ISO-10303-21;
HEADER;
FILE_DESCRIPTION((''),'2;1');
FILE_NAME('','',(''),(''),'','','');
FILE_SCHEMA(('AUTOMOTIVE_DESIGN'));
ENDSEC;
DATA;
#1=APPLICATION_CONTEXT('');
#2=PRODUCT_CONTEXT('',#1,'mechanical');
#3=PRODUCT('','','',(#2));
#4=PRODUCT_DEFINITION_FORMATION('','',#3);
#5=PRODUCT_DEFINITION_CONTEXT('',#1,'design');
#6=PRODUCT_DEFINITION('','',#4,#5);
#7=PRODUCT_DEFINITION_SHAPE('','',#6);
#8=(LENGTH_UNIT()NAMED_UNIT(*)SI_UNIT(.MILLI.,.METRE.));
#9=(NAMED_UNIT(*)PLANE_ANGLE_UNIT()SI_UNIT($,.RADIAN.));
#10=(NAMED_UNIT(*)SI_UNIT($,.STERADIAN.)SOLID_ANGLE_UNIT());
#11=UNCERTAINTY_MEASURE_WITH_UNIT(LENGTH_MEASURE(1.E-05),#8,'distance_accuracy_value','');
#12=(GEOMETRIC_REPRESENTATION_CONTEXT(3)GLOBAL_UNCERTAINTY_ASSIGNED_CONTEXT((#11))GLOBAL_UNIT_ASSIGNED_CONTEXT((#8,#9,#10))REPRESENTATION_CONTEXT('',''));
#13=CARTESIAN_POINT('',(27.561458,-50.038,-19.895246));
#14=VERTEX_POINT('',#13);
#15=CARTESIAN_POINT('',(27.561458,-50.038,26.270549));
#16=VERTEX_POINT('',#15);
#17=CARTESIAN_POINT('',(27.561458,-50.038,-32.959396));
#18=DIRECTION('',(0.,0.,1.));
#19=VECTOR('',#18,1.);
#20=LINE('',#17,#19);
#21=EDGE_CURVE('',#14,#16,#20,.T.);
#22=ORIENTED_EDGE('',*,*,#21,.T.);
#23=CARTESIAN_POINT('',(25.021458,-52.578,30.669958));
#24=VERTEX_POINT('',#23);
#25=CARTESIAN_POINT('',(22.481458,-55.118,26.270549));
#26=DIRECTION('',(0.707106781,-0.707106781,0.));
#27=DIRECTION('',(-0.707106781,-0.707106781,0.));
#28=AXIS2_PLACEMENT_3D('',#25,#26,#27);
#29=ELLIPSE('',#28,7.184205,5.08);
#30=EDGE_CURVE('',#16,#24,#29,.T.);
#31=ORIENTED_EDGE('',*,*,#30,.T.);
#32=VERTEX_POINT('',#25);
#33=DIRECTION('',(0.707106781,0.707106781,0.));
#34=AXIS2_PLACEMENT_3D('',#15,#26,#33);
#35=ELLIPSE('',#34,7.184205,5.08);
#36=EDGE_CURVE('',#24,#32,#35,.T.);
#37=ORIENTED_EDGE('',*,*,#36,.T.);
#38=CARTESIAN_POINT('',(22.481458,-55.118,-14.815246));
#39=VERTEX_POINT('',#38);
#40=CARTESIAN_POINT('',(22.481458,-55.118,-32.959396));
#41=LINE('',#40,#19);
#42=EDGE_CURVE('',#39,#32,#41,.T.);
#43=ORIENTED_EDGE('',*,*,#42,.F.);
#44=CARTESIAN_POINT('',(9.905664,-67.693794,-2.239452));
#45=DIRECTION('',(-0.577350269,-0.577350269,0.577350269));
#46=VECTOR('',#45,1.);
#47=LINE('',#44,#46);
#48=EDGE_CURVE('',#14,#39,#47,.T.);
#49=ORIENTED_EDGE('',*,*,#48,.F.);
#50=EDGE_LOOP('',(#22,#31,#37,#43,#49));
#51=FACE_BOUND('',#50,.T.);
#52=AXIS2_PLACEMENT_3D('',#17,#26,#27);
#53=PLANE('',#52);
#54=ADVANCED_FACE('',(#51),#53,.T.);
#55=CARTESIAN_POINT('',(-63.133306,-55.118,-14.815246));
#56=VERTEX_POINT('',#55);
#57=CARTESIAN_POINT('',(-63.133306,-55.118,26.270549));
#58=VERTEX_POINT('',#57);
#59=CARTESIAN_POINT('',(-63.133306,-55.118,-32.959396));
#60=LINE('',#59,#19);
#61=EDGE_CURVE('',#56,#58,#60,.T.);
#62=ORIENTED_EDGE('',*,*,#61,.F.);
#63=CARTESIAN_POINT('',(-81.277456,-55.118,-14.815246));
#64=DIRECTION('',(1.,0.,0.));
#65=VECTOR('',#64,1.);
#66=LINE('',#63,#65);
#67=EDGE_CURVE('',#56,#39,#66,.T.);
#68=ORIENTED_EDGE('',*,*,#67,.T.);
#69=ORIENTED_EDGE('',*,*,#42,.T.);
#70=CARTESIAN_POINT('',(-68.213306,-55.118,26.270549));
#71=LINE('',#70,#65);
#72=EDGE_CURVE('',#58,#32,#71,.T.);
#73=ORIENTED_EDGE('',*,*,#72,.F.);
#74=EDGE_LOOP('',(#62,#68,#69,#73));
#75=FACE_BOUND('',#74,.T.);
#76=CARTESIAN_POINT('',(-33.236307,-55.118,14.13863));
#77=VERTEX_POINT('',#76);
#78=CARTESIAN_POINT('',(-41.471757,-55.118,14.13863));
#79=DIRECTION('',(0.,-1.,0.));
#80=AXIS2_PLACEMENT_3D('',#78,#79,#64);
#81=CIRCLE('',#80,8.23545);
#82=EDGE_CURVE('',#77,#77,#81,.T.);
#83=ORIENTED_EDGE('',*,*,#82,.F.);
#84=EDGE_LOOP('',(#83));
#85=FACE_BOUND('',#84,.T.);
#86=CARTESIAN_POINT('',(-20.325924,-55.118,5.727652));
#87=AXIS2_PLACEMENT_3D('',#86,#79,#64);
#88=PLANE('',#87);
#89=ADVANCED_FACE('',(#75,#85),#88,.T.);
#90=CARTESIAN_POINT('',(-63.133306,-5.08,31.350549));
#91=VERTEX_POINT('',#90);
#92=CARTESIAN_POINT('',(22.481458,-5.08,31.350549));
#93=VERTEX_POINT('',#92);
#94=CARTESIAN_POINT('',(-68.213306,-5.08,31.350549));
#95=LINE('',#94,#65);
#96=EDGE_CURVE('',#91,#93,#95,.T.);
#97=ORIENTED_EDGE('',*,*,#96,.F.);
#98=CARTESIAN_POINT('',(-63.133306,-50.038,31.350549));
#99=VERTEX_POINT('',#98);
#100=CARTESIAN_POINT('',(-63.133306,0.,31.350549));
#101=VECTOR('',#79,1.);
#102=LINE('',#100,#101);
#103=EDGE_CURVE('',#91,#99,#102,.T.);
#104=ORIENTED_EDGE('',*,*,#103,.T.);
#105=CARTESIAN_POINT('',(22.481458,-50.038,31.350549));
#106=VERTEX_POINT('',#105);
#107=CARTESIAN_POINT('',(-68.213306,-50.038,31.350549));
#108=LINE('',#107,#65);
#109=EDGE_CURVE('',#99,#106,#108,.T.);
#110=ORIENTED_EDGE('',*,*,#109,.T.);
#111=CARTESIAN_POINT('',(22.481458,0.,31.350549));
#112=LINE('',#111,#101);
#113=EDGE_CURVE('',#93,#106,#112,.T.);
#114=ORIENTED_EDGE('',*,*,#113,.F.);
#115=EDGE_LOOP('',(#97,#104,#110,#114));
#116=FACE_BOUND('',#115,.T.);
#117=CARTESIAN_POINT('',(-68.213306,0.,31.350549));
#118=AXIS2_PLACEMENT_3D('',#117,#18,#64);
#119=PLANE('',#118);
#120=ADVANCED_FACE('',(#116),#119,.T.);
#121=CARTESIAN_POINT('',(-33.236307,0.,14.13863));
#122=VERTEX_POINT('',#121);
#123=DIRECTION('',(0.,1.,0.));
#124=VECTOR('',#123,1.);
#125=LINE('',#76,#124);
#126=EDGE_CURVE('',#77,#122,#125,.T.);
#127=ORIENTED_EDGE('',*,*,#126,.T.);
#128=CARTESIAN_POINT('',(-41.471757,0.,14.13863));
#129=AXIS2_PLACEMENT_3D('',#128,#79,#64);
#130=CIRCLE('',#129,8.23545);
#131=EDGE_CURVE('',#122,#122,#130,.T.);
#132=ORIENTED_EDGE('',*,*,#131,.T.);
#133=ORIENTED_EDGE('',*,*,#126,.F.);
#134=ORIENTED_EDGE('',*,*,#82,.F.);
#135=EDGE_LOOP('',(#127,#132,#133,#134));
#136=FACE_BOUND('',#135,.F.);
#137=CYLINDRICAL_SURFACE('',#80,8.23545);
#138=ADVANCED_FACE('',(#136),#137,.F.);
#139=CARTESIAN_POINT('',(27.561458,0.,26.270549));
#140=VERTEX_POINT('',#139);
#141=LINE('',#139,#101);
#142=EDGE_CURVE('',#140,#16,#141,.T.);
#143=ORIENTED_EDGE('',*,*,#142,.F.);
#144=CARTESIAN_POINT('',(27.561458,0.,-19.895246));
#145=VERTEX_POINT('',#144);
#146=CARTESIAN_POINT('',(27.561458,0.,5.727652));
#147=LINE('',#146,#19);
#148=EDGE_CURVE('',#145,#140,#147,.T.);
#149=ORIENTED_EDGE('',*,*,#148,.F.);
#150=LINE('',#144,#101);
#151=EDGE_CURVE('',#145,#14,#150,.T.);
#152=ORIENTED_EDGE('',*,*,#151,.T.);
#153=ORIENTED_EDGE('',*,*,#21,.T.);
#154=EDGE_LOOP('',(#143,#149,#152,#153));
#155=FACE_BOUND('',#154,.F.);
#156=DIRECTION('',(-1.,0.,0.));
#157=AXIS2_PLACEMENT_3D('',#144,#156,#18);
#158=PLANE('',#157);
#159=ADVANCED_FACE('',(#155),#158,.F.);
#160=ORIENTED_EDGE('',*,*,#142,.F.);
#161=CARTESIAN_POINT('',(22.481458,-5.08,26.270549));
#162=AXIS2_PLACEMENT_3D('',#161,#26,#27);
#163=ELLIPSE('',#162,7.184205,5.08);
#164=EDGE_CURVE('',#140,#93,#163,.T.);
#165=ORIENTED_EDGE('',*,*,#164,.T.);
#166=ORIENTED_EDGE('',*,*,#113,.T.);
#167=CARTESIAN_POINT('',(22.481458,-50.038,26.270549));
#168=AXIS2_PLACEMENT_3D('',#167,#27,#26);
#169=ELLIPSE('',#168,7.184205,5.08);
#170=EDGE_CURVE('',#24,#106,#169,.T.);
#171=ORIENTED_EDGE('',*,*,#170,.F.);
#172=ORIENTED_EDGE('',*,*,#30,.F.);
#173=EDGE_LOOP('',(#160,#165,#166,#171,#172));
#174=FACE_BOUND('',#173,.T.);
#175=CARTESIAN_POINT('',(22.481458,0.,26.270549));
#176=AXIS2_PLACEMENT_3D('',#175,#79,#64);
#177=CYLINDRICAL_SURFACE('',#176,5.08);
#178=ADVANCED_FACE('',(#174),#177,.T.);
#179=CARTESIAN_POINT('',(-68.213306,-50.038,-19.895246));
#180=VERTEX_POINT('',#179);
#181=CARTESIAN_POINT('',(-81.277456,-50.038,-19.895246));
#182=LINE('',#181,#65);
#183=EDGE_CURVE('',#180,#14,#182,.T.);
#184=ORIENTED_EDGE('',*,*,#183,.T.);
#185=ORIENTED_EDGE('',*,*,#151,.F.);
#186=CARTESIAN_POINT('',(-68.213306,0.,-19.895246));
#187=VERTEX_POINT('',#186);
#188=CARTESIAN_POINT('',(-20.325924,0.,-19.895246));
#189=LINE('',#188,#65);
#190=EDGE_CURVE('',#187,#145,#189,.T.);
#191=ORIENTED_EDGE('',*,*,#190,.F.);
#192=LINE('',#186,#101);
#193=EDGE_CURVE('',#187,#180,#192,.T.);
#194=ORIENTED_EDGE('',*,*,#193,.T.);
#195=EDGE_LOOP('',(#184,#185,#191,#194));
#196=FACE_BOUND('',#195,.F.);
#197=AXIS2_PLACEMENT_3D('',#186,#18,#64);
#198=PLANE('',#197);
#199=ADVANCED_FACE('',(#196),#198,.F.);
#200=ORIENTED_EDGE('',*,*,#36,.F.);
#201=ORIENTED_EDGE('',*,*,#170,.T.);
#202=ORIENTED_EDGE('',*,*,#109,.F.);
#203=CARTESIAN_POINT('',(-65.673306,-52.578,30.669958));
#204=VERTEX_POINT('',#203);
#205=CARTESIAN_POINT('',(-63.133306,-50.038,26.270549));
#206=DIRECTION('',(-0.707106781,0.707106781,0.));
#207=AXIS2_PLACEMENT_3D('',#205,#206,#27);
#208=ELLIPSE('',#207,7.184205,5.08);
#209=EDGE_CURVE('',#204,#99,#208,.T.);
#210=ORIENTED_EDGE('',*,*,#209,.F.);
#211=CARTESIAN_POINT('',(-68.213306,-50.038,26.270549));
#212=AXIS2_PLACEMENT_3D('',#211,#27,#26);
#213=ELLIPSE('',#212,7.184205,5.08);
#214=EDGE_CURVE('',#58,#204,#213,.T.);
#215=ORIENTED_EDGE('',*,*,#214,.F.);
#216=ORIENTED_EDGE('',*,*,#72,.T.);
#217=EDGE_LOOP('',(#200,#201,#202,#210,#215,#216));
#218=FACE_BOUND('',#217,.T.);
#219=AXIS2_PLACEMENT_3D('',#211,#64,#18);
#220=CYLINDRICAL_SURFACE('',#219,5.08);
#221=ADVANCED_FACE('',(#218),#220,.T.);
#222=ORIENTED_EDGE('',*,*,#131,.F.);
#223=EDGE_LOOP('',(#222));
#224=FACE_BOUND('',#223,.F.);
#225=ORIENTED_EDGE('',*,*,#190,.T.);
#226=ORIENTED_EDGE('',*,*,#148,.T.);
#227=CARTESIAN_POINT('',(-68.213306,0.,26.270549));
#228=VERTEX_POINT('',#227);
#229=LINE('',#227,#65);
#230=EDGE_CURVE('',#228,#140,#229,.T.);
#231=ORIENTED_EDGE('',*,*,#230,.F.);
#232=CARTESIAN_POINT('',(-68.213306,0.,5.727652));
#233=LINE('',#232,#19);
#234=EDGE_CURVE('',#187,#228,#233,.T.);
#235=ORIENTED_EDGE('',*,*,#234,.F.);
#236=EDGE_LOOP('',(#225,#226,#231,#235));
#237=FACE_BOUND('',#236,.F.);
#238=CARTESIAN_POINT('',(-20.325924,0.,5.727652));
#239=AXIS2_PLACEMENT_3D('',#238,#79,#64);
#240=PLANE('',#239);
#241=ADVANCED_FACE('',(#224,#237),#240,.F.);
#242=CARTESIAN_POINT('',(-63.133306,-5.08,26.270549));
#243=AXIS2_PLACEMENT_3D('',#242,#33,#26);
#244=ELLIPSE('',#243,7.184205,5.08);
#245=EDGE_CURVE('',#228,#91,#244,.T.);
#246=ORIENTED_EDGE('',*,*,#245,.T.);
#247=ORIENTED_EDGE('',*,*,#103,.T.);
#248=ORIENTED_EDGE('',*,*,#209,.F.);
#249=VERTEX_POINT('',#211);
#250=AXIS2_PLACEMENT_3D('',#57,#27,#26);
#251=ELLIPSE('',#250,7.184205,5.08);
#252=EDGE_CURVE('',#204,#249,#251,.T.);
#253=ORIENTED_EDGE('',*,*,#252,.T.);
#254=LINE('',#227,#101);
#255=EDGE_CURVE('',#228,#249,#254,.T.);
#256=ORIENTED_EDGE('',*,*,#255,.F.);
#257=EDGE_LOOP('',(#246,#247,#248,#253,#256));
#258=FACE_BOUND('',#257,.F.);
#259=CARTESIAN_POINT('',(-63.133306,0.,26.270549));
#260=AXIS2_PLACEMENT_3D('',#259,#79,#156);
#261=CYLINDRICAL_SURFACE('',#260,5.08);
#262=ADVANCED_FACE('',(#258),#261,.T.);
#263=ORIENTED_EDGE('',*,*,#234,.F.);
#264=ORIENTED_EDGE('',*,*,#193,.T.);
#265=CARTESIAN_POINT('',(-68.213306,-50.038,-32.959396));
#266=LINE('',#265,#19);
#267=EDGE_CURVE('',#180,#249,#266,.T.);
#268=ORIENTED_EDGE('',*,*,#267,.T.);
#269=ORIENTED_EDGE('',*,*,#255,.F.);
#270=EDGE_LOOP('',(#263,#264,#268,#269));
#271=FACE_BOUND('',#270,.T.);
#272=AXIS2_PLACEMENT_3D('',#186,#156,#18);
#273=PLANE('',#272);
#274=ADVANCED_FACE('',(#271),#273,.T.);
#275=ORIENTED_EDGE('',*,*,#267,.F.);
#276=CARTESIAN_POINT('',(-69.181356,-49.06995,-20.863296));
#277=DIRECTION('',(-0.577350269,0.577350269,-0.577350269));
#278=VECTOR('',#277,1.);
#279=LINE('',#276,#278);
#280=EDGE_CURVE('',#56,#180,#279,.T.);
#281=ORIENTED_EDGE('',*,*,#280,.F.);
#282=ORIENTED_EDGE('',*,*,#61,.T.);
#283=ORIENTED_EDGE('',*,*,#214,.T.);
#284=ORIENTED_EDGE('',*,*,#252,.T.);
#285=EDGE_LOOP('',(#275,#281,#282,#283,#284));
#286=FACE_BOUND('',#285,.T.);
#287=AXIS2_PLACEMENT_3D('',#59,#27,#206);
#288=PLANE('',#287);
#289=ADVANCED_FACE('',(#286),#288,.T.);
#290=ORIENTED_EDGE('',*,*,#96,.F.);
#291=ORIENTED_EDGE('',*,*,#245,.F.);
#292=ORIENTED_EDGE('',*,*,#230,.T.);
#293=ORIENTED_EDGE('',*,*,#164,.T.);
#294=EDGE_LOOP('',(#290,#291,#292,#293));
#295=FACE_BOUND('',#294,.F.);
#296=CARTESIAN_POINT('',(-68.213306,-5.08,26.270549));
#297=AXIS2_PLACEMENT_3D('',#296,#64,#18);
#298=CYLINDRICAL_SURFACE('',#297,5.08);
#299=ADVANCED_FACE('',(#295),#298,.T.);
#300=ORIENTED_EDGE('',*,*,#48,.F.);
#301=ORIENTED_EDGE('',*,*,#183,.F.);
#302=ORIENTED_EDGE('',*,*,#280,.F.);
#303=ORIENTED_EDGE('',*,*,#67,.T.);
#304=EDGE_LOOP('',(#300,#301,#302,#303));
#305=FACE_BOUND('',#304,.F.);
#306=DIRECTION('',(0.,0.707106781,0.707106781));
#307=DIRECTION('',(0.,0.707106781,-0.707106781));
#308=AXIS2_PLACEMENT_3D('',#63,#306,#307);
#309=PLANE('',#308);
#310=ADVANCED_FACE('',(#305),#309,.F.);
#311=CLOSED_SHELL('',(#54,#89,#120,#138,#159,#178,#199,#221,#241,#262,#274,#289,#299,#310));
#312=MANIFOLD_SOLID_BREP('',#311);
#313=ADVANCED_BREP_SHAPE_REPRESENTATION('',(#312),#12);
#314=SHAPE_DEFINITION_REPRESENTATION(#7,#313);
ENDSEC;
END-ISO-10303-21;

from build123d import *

# Parameters (mm, degrees)
F0_W        = 95.7747641951
F0_H        = 51.2457955629
F1_DEPTH    = 55.118
F2_R        = 5.08
F3_T1_DEPTH = 72.2940947206
F3_T3_DEPTH = 121.9030633528
F4_R        = 8.2354501167
F5_DEPTH    = 129.032


# Not quite as in the source:
# - a fillet or chamfer that OpenCascade refuses, or shapes differently, is made with other operations: its cross-section is extruded or revolved along the edge and cut away or added


with BuildPart() as f1:
    # F0 (on Front) → F1 (new body)
    with BuildSketch(Plane.XZ):
        with Locations((-20.3259242699, 5.727651529)):
            Rectangle(F0_W, F0_H)
    extrude(amount=F1_DEPTH)

    # F2
    f2_edges = [f1.edges().sort_by_distance(p)[0] for p in [
        (27.561458, -27.559, 31.350549),
        (-68.213306, -27.559, 31.350549),
        (-20.325924, 0, 31.350549),
        (-20.325924, -55.118, 31.350549),
    ]]
    fillet(f2_edges, radius=F2_R)

    # F3: chamfer of 5.08 on 4 edges, made by hand

    # F3_s2 → F3_t1 (cut)
    with BuildSketch(Plane.XY.offset(-32.9593958313)):
        Polygon((-63.1333063674, -55.118), (-68.2133063674, -50.038), (-68.2133063674, -55.118), align=None)
        Polygon((27.5614578277, -50.038), (22.4814578277, -55.118), (27.5614578277, -55.118), align=None)
    extrude(amount=F3_T1_DEPTH, mode=Mode.SUBTRACT)

    # F3_s4 → F3_t3 (cut)
    with BuildSketch(Plane.YZ.offset(-81.2774559463)):
        Polygon((-55.118, -14.8152462524), (-50.038, -19.8952462524), (-55.118, -19.8952462524), align=None)
    extrude(amount=F3_T3_DEPTH, mode=Mode.SUBTRACT)

    # F4 (on face) → F5 (cut)
    with BuildSketch(Plane.XZ.offset(55.118)):
        with Locations((-41.4717569947, 14.13862966)):
            Circle(F4_R)
    extrude(amount=-F5_DEPTH, mode=Mode.SUBTRACT)


solid = f1.part
